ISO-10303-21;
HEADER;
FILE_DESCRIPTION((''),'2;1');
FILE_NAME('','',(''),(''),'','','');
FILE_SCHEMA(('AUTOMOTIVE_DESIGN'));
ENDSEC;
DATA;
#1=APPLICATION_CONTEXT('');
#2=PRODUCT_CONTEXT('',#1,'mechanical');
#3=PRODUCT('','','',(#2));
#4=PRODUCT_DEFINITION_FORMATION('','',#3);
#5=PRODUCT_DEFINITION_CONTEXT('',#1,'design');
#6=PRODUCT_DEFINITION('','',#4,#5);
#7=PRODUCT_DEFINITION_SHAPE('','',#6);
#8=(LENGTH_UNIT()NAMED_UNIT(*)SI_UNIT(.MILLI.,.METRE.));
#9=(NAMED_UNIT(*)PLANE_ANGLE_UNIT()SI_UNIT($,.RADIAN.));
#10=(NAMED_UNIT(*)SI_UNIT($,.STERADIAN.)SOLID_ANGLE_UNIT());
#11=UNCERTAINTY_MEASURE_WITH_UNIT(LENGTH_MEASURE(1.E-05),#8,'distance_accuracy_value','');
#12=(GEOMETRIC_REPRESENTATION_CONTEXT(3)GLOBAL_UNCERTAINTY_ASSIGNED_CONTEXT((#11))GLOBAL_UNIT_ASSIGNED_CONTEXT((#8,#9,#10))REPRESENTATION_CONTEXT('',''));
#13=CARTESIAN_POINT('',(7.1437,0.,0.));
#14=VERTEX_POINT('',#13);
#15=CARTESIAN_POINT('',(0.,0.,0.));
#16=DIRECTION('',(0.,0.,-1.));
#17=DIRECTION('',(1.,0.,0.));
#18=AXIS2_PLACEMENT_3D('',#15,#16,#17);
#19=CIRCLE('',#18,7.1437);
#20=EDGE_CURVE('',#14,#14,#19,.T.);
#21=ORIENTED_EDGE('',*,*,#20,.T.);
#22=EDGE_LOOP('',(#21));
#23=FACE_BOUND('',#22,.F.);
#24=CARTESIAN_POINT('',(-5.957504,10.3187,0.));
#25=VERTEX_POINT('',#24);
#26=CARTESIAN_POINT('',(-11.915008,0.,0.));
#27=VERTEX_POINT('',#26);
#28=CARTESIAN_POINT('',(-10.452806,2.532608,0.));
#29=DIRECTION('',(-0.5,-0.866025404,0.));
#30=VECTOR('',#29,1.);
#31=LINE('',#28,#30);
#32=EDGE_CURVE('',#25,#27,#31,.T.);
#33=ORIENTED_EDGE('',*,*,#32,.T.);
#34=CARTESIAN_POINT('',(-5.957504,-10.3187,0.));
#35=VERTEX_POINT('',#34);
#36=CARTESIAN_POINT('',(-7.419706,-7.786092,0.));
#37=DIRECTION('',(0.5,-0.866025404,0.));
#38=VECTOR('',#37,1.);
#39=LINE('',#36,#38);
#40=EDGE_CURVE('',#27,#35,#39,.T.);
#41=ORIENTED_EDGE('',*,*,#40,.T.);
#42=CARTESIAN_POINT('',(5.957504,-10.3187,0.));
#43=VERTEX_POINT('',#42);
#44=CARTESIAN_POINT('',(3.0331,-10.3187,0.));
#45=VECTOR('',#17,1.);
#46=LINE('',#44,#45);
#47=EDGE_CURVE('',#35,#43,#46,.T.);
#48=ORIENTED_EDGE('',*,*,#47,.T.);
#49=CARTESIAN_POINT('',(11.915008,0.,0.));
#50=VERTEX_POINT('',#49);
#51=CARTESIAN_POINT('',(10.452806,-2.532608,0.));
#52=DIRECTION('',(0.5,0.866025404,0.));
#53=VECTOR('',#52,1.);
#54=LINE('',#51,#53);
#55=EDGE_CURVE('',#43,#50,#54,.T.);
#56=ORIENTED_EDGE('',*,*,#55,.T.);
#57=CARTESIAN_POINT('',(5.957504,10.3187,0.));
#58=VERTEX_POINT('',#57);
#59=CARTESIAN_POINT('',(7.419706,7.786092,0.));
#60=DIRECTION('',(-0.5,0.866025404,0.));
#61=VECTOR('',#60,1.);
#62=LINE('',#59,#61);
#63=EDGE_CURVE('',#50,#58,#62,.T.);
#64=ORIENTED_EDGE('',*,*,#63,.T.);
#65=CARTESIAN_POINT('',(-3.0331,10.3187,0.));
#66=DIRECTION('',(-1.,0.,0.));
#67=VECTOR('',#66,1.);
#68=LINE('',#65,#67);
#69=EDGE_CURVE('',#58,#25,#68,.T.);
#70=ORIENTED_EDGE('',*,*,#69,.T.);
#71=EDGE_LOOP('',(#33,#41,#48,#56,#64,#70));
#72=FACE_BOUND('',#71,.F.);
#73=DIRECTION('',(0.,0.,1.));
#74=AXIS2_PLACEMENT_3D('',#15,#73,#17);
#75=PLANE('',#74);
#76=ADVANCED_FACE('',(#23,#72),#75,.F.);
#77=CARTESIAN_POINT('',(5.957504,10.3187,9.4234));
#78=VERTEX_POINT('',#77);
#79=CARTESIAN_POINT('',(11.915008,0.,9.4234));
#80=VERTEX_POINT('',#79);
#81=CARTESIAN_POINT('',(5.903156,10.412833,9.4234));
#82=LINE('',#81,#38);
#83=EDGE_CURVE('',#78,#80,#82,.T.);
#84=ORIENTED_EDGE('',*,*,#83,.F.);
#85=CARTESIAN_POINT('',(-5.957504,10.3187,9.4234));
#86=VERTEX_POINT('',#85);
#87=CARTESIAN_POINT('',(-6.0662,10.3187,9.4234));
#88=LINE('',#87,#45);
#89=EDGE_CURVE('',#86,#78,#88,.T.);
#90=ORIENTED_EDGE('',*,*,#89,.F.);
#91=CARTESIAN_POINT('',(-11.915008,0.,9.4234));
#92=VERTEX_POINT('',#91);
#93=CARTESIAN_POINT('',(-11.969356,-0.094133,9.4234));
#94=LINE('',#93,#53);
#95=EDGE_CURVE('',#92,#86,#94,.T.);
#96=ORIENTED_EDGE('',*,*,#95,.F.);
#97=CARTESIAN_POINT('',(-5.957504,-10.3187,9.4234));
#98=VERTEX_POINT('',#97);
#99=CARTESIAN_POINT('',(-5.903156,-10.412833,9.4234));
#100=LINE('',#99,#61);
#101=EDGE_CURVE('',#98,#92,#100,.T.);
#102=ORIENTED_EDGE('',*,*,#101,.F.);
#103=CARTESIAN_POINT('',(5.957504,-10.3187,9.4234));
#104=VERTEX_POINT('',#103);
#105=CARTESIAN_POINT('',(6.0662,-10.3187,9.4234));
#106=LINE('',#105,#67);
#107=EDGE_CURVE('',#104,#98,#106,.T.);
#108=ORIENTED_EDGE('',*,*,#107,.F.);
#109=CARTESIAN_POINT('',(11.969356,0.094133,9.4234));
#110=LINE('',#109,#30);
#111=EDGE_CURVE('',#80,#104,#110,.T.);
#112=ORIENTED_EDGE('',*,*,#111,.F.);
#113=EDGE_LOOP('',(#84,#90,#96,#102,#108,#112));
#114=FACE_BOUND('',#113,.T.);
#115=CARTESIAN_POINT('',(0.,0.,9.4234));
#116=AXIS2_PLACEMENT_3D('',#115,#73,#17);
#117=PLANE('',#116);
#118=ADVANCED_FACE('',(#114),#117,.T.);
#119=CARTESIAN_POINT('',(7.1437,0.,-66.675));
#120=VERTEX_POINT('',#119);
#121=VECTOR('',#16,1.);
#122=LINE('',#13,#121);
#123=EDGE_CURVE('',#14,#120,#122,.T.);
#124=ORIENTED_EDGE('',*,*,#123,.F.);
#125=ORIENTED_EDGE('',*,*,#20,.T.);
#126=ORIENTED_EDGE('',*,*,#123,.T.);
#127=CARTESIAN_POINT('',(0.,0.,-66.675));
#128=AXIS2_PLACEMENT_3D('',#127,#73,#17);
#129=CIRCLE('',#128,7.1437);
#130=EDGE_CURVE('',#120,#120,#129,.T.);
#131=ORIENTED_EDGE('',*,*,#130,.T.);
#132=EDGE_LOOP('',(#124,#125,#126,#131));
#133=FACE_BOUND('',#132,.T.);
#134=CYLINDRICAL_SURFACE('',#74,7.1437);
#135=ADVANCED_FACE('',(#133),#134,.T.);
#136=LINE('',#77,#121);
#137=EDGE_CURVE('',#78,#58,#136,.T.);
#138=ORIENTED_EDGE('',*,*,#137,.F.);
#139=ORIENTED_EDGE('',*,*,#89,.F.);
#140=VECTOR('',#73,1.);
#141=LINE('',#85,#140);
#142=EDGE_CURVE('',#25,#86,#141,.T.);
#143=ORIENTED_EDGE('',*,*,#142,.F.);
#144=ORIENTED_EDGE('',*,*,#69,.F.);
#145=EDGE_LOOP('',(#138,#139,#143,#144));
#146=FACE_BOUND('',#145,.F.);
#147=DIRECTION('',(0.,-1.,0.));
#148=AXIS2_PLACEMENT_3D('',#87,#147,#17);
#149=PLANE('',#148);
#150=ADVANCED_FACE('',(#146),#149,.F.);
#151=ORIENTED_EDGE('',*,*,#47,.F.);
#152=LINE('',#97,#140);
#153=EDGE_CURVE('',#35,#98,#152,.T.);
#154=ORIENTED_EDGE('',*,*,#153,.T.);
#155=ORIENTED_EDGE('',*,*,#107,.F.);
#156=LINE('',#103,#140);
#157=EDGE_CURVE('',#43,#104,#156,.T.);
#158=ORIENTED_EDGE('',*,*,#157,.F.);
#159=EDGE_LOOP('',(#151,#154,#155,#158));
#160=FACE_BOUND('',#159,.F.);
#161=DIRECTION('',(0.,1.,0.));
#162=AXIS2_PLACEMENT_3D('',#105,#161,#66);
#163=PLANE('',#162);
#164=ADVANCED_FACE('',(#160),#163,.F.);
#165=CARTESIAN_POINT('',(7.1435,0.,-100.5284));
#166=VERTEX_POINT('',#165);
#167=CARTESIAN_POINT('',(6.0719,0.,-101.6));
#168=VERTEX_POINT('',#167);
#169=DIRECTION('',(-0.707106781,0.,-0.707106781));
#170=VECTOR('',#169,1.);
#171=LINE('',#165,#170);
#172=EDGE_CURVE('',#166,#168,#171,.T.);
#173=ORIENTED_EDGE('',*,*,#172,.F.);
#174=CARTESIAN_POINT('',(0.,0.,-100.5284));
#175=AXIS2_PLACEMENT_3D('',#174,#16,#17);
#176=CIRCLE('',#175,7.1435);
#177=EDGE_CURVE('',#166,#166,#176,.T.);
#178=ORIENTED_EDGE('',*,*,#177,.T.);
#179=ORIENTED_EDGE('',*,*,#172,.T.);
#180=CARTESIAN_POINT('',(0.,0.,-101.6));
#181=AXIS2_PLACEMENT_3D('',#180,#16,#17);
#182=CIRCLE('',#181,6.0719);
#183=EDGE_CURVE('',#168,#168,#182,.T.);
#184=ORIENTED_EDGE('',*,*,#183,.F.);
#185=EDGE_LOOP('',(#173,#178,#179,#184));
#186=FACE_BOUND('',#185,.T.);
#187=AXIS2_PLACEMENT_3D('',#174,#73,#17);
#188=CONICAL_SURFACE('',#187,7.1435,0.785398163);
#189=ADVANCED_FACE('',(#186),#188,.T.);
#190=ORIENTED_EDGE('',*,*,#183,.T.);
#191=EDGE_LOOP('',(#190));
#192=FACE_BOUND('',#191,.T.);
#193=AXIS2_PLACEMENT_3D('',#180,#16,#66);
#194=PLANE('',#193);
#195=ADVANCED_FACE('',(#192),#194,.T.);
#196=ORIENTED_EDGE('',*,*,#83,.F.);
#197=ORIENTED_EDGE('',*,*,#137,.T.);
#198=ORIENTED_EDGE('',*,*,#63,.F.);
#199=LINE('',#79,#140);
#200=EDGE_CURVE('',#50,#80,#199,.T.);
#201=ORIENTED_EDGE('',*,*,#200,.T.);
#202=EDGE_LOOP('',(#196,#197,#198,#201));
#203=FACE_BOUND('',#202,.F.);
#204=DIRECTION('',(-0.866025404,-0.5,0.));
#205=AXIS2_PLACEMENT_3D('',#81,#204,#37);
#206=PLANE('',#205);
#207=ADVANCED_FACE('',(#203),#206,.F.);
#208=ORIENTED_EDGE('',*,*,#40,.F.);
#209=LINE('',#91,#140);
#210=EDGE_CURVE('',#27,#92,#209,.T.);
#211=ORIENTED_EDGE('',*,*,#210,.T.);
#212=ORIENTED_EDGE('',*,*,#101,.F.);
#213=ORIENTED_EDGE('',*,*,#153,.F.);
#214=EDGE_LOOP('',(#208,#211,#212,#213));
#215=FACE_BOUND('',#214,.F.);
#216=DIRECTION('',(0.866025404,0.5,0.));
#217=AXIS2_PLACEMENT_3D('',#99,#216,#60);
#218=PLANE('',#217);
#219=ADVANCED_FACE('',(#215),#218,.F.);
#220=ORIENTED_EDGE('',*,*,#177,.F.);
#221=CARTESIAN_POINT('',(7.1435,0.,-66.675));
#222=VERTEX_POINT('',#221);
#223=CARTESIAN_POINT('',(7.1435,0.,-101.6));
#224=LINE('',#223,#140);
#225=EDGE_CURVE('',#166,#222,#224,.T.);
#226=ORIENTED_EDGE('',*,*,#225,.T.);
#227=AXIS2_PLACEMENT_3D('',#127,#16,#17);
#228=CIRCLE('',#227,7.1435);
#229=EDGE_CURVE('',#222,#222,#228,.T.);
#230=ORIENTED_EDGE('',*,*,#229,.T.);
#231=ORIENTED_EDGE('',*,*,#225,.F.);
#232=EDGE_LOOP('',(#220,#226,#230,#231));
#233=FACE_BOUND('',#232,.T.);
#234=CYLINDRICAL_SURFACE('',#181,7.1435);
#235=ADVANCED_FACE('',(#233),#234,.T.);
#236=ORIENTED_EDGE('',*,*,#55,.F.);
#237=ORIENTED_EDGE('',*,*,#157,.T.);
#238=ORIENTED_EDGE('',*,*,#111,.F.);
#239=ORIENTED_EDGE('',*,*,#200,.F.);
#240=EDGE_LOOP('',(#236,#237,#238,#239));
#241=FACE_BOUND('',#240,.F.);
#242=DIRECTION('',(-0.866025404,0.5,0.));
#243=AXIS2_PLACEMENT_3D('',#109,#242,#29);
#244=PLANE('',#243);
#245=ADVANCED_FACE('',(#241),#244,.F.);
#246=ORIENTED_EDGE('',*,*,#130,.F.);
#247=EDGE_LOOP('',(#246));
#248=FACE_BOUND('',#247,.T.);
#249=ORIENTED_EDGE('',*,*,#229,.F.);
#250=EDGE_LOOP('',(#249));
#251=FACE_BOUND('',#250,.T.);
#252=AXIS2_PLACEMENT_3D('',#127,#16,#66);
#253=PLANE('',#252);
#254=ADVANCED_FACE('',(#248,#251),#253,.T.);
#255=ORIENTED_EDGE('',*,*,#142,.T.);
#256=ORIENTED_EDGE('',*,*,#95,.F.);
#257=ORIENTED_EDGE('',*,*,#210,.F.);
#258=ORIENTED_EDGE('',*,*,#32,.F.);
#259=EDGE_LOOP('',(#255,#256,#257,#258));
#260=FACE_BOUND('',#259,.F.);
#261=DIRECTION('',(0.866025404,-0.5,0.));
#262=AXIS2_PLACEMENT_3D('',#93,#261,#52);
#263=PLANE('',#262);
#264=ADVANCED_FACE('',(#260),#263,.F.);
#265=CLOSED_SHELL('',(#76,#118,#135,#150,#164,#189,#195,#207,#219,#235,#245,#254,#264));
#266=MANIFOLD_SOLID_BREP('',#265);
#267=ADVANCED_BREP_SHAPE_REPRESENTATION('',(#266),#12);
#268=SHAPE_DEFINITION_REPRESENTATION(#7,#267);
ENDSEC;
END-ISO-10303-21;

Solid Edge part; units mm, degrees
sketch "Sketch1" plane through (0, 0, 0) normal (0, 0, 1) x (1, 0, 0)
  circle A0 centre (0, 0) radius 11.9697
  dimension "D1" = 23.9395
extrude "Protrusion1" add sketch "Sketch1" along normal blind 9.4234
sketch "Sketch2" plane through (0, 0, 0) normal (0, 0, -1) x (1, 0, 0)
  circle A0 centre (0, 0) radius 7.1437
extrude "Protrusion2" add sketch "Sketch2" along normal blind 101.6
sketch "Sketch3" plane through (0, 0, -101.6) normal (0, 0, -1) x (1, 0, 0)
  circle A0 centre (0, 0) radius 7.1435
extrude "Cutout1" cut sketch "Sketch3" against normal blind 34.925 flip side to cut
chamfer "Chamfer_1" distance 1.0716 angle 45 1 edges at (-7.1435, 0, -101.6)
sketch "Sketch4" plane through (0, 0, 9.4234) normal (0, 0, 1) x (1, 0, 0)
  line L0 (-6.0662, 10.3187) -> (6.0662, 10.3187)
  dimension "D1" = 20.6375
extrude "Cutout2" cut sketch "Sketch4" against normal up to next material side at (0, 10.3687, 9.4234)
pattern_circular "Pattern1" count 6 over 360 about axis through (0, 0, 9.4234) along (0, 0, 1) of "Cutout2"
properties part number "24101176"
